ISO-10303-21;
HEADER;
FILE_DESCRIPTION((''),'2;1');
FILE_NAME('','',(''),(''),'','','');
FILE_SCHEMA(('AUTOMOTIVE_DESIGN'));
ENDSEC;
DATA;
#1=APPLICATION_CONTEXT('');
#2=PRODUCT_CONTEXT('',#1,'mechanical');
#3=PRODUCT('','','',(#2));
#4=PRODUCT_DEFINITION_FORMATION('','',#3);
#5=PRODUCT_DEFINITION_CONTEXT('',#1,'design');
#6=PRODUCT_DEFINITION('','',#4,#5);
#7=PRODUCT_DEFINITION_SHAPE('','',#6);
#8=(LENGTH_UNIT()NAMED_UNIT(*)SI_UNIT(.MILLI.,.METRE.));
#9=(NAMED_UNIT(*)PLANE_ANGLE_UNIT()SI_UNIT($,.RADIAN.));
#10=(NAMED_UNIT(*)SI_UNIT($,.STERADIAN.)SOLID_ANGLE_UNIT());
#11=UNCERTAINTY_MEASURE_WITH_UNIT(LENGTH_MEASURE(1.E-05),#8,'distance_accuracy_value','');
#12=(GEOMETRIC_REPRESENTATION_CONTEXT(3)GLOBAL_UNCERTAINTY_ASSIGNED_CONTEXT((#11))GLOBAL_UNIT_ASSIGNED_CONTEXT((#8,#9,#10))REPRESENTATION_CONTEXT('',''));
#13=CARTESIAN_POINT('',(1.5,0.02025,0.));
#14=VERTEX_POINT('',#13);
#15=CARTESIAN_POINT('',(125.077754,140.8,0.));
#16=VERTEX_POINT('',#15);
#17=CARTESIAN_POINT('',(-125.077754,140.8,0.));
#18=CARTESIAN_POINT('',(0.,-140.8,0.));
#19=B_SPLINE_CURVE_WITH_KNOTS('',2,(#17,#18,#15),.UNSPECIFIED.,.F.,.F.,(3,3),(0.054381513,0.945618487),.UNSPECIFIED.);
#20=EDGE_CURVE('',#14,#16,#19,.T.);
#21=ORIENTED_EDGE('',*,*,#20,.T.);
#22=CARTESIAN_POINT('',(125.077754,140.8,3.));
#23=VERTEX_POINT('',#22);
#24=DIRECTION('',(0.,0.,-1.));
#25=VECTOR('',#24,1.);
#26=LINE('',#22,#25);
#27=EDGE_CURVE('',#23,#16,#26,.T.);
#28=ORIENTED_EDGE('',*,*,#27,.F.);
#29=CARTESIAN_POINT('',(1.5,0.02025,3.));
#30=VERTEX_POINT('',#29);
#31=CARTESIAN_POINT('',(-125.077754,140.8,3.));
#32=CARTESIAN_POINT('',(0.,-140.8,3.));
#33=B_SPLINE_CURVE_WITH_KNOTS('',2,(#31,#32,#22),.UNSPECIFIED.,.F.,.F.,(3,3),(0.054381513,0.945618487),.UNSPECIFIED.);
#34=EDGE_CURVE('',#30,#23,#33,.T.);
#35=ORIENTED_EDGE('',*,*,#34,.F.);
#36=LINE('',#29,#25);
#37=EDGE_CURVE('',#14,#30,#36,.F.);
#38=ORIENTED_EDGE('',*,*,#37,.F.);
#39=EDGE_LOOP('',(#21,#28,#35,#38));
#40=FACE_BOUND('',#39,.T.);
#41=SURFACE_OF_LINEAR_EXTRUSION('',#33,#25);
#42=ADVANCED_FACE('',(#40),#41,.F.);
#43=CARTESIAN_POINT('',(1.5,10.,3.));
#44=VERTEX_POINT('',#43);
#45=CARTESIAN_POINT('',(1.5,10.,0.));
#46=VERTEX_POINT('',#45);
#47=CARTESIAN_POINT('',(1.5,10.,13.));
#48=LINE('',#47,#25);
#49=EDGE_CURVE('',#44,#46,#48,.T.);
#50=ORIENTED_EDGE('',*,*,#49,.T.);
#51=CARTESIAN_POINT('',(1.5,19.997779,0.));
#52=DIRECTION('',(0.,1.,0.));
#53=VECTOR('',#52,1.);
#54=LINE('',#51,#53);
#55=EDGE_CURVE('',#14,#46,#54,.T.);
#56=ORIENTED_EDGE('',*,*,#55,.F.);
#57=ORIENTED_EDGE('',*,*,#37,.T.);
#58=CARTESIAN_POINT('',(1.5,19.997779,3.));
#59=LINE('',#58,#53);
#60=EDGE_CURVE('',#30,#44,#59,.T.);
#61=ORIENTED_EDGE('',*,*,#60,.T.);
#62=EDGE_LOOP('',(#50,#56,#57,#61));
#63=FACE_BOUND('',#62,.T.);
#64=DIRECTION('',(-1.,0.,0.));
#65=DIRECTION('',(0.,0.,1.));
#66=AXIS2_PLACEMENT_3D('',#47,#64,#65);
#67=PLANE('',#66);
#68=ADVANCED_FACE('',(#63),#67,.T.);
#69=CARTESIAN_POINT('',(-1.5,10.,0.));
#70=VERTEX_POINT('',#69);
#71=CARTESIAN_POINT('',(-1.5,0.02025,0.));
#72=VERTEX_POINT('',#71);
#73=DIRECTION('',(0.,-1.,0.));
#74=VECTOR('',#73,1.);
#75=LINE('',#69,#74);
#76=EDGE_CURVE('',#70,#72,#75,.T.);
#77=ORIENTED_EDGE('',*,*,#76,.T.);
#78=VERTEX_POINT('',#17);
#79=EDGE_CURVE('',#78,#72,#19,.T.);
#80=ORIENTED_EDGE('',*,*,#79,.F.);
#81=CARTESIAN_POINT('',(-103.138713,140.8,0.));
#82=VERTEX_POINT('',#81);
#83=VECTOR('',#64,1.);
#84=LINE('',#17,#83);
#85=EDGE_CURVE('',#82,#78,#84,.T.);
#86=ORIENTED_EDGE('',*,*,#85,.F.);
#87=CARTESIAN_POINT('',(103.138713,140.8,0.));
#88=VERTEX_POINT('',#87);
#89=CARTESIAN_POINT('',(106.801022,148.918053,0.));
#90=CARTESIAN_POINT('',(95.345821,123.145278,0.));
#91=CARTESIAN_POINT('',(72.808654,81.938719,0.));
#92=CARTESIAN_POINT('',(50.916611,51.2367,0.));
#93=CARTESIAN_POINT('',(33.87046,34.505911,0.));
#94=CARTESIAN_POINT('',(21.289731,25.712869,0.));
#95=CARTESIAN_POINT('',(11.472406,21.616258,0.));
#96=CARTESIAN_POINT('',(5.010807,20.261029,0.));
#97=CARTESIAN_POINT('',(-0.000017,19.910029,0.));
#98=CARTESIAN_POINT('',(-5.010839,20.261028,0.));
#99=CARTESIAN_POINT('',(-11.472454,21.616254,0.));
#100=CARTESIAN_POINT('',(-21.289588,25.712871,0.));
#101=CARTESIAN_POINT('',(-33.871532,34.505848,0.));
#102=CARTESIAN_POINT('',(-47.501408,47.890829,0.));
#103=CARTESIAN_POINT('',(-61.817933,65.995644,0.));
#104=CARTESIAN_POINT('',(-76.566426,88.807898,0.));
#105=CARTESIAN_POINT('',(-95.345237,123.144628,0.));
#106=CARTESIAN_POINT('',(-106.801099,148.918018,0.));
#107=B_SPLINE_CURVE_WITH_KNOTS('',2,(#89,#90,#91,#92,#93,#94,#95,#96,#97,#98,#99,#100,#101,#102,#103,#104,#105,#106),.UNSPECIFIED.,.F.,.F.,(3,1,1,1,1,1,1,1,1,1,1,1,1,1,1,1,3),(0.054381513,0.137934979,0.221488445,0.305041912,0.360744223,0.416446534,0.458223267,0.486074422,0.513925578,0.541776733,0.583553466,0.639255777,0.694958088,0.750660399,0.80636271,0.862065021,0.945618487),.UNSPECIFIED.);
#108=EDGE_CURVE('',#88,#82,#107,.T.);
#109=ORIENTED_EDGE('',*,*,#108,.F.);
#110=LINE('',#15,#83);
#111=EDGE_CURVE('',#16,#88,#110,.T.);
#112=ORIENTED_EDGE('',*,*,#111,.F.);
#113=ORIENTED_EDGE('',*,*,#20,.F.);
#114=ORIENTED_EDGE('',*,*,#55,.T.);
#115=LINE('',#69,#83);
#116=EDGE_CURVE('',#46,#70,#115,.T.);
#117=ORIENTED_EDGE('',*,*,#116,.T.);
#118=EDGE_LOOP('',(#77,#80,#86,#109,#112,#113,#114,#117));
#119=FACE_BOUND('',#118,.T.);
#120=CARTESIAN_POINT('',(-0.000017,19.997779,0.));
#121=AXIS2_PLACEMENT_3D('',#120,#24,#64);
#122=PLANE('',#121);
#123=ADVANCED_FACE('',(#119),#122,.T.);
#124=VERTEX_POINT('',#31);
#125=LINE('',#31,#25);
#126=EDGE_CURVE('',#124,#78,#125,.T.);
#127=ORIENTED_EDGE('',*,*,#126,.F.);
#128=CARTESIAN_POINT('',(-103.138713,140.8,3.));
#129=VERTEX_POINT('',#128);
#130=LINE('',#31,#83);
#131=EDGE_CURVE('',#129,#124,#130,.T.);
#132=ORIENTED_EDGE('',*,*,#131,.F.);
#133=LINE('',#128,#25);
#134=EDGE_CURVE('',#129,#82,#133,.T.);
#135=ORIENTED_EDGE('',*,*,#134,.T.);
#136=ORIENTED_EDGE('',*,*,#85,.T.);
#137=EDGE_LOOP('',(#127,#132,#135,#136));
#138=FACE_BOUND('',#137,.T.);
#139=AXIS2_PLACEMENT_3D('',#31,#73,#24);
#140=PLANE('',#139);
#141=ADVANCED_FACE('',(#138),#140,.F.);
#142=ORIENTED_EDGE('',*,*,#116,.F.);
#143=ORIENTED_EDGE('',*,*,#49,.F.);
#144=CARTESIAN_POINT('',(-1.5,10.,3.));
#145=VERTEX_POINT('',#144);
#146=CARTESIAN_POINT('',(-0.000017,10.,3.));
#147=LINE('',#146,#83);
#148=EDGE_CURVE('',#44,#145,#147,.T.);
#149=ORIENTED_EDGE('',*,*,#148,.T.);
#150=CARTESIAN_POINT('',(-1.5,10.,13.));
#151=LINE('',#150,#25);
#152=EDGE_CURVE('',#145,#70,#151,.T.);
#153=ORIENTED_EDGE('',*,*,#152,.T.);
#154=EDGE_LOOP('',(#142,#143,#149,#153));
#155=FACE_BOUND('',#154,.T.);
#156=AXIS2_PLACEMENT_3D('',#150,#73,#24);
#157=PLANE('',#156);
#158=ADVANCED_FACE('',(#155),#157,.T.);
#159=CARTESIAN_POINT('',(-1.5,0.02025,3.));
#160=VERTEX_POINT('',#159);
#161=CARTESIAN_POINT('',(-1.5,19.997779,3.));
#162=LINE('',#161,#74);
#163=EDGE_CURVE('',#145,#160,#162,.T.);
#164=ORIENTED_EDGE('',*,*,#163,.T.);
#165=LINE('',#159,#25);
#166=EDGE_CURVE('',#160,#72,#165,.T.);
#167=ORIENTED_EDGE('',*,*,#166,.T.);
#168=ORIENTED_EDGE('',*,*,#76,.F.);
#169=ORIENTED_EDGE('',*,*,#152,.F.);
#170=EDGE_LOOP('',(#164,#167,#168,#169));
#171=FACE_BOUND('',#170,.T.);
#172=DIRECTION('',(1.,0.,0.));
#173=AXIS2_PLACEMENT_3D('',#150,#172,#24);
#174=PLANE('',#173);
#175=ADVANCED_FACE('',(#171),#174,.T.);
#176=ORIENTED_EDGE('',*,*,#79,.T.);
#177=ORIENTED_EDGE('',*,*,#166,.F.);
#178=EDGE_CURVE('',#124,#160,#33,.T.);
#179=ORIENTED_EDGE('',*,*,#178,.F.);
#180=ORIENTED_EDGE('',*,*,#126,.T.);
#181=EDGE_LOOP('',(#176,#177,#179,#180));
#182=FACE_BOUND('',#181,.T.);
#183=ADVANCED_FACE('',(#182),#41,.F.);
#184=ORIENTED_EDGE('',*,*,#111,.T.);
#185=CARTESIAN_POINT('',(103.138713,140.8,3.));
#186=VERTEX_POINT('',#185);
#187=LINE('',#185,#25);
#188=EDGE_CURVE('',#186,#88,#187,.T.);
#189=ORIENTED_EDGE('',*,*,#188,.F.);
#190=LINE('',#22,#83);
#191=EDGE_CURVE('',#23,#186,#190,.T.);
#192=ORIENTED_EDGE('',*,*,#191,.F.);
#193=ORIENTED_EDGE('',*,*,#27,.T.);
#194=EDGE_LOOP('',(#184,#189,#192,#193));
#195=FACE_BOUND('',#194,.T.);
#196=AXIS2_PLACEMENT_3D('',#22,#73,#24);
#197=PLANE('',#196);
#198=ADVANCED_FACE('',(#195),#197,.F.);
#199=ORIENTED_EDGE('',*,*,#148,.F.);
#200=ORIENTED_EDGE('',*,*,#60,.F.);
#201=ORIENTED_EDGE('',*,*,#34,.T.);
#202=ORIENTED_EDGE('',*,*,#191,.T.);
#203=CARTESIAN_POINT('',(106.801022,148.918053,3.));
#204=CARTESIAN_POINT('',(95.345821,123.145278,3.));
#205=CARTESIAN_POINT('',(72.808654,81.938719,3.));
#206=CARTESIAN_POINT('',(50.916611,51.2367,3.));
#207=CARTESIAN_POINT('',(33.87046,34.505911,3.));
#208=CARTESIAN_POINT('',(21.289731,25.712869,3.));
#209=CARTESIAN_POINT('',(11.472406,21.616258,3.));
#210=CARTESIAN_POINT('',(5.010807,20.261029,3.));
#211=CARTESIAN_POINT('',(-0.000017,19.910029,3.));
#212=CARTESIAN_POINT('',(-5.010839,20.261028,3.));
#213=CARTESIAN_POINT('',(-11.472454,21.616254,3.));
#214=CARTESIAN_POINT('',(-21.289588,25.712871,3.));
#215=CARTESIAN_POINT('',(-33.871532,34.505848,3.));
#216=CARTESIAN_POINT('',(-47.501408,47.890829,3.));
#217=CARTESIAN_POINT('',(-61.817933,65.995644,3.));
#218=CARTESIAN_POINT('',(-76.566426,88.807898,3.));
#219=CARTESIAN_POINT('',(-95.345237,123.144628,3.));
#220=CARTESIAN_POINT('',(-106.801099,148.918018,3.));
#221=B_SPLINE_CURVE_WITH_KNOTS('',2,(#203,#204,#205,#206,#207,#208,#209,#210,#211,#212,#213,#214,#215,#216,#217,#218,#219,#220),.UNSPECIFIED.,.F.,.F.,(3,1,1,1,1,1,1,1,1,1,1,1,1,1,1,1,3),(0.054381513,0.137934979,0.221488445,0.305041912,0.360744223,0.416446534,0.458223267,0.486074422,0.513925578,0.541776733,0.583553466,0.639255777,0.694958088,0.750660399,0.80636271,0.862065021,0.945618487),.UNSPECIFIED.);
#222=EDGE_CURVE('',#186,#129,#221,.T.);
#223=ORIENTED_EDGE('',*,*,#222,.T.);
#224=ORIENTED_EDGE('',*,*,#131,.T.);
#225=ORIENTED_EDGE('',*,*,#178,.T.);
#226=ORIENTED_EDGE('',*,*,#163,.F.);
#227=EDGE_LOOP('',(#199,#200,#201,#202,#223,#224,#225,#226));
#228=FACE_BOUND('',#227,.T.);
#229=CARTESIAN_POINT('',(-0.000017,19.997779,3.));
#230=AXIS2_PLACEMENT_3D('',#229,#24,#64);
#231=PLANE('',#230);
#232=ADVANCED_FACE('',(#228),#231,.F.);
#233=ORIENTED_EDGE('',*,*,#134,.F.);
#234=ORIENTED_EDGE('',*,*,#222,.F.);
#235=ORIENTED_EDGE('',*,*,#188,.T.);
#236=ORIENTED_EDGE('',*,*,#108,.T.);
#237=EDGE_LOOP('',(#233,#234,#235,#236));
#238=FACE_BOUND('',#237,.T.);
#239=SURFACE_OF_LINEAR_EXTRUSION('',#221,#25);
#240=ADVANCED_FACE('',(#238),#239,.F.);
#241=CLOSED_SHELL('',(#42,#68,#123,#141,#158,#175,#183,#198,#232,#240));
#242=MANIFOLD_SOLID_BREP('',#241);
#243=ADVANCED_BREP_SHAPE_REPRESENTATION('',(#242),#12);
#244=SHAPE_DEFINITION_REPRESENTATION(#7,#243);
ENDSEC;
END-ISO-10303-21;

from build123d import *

# Parameters (mm, degrees)
BOSS_EXTRUDE1_DEPTH = 3
SKETCH2_W           = 3
SKETCH2_H           = 14.324437629
CUT_EXTRUDE1_DEPTH  = 13


# Read off the part's stored shape, not the designer's step: Boss-Extrude1
with BuildPart() as part:
    # Boss-Extrude1 outline → Boss-Extrude1 (new body)
    with BuildSketch(Plane.XY):
        with BuildLine():
            Line((125.077753595, 140.799999999), (103.138713338, 140.799999999))
            add(Edge.make_bspline(
                [(103.138713338, 140.799999999), (93.542146278, 119.847471898), (72.808653967, 81.938719065), (50.916611333, 51.236700067), (33.870460098, 34.505911397), (21.289730771, 25.712869222), (11.472405571, 21.616258487), (5.010806556, 20.261029403), (-1.7438e-05, 19.910029363), (-5.010839163, 20.261027839), (-11.472453528, 21.616254055), (-21.289588116, 25.712871213), (-33.871531711, 34.505848314), (-47.501408239, 47.890829337), (-61.817933067, 65.995643553), (-76.566426388, 88.807898183), (-93.541811929, 119.847096454), (-103.138713338, 140.800000001)],
                knots=[0.067755266, 0.067755266, 0.067755266, 0.137934979, 0.221488445, 0.305041912, 0.360744223, 0.416446534, 0.458223267, 0.486074422, 0.513925578, 0.541776733, 0.583553466, 0.639255777, 0.694958088, 0.750660399, 0.80636271, 0.862065021, 0.932245043, 0.932245043, 0.932245043], degree=2))
            Line((-103.138713338, 140.800000001), (-125.077753596, 140.800000001))
            add(Edge.make_bspline(
                [(-125.077753596, 140.800000001), (0, -140.8), (125.077753595, 140.799999999)],
                knots=[0.054381513, 0.054381513, 0.054381513, 0.945618487, 0.945618487, 0.945618487], degree=2))
        make_face()
    extrude(amount=BOSS_EXTRUDE1_DEPTH)

    # Sketch2 → Cut-Extrude1 (cut)
    with BuildSketch(Plane.XY):
        with Locations((0, 2.837781185)):
            Rectangle(SKETCH2_W, SKETCH2_H)
    extrude(amount=CUT_EXTRUDE1_DEPTH, mode=Mode.SUBTRACT)


solid = part.part
